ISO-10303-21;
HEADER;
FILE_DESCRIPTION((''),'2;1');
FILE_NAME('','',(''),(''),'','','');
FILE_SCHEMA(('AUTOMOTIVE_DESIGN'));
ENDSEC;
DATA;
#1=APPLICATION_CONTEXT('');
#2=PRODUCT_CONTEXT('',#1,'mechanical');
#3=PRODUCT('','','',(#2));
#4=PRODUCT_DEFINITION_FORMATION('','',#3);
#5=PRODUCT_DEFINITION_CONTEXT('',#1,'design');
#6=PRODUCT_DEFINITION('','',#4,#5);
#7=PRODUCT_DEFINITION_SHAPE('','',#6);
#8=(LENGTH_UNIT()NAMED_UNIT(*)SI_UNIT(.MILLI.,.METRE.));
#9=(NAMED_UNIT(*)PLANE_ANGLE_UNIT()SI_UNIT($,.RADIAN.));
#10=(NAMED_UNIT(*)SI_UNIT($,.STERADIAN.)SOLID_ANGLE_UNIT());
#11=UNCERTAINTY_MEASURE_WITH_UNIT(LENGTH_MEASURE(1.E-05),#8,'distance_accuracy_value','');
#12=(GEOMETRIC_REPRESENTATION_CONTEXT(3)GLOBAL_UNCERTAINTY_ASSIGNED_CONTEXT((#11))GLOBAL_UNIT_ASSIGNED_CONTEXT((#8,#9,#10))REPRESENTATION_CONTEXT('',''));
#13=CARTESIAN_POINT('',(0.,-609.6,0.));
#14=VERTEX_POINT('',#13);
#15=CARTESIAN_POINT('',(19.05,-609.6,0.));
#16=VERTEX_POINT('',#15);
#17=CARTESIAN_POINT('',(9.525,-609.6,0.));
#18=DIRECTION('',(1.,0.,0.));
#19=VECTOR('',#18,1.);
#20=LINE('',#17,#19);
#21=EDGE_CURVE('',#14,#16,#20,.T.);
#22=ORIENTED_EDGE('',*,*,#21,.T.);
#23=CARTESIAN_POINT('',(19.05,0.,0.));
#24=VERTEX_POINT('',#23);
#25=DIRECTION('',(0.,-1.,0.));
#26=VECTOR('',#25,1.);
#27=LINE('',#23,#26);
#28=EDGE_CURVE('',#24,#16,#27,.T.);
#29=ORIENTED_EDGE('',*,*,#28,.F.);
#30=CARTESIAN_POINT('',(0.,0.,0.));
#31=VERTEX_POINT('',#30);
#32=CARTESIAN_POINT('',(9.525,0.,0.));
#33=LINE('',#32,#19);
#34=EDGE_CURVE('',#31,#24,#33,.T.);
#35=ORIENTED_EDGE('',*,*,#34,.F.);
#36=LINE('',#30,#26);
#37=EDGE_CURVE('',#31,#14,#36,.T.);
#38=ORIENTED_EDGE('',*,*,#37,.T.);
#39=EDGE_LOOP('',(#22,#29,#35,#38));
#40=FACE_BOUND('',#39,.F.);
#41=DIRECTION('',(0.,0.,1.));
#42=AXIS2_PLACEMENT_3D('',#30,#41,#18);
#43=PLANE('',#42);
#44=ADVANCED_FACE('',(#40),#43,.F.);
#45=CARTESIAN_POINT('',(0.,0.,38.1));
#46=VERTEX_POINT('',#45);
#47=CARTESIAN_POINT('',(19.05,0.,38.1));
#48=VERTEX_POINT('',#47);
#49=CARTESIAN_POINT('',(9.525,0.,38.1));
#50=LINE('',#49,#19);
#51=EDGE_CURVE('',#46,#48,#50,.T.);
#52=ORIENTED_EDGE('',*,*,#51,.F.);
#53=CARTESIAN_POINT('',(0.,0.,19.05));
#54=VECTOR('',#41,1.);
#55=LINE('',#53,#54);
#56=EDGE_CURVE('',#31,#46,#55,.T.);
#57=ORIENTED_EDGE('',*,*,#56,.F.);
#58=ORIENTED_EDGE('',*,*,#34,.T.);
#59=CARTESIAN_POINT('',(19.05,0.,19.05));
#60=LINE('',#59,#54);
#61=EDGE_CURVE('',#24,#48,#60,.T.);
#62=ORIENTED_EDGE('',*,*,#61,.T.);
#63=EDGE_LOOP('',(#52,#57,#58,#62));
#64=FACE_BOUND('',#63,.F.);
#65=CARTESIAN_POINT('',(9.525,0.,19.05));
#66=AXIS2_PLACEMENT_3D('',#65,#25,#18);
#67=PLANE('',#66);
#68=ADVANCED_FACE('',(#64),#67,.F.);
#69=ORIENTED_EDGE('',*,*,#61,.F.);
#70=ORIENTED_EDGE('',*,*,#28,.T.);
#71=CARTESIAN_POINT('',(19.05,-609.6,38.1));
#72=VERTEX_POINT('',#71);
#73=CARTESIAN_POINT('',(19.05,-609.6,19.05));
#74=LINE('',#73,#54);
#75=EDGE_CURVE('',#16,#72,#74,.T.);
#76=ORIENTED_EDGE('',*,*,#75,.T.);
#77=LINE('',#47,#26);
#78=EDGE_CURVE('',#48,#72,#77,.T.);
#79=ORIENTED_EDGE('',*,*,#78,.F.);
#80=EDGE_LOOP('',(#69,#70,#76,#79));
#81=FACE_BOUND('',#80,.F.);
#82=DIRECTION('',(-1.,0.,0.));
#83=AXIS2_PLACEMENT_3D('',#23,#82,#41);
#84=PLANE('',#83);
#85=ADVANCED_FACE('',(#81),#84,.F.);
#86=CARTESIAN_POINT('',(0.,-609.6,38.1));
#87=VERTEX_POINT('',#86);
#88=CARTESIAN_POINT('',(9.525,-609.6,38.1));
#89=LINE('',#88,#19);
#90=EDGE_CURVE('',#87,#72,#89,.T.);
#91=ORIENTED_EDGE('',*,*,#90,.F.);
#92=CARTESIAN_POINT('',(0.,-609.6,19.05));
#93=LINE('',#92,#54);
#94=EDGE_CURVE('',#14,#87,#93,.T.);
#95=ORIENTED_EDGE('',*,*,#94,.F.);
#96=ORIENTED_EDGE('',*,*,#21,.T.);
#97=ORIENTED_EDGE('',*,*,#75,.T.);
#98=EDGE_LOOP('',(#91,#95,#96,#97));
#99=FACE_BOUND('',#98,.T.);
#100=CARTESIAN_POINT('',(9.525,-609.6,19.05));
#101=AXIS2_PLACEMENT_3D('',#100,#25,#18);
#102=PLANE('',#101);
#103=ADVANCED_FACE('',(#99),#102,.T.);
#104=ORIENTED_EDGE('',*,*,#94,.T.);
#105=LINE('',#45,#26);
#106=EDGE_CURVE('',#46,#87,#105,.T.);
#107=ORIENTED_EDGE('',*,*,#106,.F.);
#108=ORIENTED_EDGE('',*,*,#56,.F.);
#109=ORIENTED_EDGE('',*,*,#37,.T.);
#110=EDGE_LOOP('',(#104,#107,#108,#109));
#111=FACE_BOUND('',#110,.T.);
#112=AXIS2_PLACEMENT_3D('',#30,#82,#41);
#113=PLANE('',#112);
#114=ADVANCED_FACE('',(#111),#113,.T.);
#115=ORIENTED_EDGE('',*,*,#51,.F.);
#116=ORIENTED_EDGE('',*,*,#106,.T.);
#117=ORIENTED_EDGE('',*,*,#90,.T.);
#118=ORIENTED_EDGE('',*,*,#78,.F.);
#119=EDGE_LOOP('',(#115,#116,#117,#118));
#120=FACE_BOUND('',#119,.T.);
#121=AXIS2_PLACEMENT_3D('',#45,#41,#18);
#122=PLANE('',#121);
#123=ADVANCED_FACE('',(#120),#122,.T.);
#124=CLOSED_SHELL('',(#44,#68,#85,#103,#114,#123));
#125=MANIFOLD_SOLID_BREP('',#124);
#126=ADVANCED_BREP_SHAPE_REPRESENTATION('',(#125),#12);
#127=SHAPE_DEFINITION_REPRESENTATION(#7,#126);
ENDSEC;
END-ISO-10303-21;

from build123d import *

# Parameters (mm, degrees)
F1_W     = 19.05
F1_H     = 38.1
F2_DEPTH = 609.6


# Not quite as in the source:
# - a variable given as a bare number and used for a length is read in inches; the dataset says mm whatever the document's units were


with BuildPart() as f2:
    # F1 (on Front) → F2 (new body)
    with BuildSketch(Plane.XZ):
        with Locations((9.525, 19.05)):
            Rectangle(F1_W, F1_H)
    extrude(amount=F2_DEPTH)


solid = f2.part
